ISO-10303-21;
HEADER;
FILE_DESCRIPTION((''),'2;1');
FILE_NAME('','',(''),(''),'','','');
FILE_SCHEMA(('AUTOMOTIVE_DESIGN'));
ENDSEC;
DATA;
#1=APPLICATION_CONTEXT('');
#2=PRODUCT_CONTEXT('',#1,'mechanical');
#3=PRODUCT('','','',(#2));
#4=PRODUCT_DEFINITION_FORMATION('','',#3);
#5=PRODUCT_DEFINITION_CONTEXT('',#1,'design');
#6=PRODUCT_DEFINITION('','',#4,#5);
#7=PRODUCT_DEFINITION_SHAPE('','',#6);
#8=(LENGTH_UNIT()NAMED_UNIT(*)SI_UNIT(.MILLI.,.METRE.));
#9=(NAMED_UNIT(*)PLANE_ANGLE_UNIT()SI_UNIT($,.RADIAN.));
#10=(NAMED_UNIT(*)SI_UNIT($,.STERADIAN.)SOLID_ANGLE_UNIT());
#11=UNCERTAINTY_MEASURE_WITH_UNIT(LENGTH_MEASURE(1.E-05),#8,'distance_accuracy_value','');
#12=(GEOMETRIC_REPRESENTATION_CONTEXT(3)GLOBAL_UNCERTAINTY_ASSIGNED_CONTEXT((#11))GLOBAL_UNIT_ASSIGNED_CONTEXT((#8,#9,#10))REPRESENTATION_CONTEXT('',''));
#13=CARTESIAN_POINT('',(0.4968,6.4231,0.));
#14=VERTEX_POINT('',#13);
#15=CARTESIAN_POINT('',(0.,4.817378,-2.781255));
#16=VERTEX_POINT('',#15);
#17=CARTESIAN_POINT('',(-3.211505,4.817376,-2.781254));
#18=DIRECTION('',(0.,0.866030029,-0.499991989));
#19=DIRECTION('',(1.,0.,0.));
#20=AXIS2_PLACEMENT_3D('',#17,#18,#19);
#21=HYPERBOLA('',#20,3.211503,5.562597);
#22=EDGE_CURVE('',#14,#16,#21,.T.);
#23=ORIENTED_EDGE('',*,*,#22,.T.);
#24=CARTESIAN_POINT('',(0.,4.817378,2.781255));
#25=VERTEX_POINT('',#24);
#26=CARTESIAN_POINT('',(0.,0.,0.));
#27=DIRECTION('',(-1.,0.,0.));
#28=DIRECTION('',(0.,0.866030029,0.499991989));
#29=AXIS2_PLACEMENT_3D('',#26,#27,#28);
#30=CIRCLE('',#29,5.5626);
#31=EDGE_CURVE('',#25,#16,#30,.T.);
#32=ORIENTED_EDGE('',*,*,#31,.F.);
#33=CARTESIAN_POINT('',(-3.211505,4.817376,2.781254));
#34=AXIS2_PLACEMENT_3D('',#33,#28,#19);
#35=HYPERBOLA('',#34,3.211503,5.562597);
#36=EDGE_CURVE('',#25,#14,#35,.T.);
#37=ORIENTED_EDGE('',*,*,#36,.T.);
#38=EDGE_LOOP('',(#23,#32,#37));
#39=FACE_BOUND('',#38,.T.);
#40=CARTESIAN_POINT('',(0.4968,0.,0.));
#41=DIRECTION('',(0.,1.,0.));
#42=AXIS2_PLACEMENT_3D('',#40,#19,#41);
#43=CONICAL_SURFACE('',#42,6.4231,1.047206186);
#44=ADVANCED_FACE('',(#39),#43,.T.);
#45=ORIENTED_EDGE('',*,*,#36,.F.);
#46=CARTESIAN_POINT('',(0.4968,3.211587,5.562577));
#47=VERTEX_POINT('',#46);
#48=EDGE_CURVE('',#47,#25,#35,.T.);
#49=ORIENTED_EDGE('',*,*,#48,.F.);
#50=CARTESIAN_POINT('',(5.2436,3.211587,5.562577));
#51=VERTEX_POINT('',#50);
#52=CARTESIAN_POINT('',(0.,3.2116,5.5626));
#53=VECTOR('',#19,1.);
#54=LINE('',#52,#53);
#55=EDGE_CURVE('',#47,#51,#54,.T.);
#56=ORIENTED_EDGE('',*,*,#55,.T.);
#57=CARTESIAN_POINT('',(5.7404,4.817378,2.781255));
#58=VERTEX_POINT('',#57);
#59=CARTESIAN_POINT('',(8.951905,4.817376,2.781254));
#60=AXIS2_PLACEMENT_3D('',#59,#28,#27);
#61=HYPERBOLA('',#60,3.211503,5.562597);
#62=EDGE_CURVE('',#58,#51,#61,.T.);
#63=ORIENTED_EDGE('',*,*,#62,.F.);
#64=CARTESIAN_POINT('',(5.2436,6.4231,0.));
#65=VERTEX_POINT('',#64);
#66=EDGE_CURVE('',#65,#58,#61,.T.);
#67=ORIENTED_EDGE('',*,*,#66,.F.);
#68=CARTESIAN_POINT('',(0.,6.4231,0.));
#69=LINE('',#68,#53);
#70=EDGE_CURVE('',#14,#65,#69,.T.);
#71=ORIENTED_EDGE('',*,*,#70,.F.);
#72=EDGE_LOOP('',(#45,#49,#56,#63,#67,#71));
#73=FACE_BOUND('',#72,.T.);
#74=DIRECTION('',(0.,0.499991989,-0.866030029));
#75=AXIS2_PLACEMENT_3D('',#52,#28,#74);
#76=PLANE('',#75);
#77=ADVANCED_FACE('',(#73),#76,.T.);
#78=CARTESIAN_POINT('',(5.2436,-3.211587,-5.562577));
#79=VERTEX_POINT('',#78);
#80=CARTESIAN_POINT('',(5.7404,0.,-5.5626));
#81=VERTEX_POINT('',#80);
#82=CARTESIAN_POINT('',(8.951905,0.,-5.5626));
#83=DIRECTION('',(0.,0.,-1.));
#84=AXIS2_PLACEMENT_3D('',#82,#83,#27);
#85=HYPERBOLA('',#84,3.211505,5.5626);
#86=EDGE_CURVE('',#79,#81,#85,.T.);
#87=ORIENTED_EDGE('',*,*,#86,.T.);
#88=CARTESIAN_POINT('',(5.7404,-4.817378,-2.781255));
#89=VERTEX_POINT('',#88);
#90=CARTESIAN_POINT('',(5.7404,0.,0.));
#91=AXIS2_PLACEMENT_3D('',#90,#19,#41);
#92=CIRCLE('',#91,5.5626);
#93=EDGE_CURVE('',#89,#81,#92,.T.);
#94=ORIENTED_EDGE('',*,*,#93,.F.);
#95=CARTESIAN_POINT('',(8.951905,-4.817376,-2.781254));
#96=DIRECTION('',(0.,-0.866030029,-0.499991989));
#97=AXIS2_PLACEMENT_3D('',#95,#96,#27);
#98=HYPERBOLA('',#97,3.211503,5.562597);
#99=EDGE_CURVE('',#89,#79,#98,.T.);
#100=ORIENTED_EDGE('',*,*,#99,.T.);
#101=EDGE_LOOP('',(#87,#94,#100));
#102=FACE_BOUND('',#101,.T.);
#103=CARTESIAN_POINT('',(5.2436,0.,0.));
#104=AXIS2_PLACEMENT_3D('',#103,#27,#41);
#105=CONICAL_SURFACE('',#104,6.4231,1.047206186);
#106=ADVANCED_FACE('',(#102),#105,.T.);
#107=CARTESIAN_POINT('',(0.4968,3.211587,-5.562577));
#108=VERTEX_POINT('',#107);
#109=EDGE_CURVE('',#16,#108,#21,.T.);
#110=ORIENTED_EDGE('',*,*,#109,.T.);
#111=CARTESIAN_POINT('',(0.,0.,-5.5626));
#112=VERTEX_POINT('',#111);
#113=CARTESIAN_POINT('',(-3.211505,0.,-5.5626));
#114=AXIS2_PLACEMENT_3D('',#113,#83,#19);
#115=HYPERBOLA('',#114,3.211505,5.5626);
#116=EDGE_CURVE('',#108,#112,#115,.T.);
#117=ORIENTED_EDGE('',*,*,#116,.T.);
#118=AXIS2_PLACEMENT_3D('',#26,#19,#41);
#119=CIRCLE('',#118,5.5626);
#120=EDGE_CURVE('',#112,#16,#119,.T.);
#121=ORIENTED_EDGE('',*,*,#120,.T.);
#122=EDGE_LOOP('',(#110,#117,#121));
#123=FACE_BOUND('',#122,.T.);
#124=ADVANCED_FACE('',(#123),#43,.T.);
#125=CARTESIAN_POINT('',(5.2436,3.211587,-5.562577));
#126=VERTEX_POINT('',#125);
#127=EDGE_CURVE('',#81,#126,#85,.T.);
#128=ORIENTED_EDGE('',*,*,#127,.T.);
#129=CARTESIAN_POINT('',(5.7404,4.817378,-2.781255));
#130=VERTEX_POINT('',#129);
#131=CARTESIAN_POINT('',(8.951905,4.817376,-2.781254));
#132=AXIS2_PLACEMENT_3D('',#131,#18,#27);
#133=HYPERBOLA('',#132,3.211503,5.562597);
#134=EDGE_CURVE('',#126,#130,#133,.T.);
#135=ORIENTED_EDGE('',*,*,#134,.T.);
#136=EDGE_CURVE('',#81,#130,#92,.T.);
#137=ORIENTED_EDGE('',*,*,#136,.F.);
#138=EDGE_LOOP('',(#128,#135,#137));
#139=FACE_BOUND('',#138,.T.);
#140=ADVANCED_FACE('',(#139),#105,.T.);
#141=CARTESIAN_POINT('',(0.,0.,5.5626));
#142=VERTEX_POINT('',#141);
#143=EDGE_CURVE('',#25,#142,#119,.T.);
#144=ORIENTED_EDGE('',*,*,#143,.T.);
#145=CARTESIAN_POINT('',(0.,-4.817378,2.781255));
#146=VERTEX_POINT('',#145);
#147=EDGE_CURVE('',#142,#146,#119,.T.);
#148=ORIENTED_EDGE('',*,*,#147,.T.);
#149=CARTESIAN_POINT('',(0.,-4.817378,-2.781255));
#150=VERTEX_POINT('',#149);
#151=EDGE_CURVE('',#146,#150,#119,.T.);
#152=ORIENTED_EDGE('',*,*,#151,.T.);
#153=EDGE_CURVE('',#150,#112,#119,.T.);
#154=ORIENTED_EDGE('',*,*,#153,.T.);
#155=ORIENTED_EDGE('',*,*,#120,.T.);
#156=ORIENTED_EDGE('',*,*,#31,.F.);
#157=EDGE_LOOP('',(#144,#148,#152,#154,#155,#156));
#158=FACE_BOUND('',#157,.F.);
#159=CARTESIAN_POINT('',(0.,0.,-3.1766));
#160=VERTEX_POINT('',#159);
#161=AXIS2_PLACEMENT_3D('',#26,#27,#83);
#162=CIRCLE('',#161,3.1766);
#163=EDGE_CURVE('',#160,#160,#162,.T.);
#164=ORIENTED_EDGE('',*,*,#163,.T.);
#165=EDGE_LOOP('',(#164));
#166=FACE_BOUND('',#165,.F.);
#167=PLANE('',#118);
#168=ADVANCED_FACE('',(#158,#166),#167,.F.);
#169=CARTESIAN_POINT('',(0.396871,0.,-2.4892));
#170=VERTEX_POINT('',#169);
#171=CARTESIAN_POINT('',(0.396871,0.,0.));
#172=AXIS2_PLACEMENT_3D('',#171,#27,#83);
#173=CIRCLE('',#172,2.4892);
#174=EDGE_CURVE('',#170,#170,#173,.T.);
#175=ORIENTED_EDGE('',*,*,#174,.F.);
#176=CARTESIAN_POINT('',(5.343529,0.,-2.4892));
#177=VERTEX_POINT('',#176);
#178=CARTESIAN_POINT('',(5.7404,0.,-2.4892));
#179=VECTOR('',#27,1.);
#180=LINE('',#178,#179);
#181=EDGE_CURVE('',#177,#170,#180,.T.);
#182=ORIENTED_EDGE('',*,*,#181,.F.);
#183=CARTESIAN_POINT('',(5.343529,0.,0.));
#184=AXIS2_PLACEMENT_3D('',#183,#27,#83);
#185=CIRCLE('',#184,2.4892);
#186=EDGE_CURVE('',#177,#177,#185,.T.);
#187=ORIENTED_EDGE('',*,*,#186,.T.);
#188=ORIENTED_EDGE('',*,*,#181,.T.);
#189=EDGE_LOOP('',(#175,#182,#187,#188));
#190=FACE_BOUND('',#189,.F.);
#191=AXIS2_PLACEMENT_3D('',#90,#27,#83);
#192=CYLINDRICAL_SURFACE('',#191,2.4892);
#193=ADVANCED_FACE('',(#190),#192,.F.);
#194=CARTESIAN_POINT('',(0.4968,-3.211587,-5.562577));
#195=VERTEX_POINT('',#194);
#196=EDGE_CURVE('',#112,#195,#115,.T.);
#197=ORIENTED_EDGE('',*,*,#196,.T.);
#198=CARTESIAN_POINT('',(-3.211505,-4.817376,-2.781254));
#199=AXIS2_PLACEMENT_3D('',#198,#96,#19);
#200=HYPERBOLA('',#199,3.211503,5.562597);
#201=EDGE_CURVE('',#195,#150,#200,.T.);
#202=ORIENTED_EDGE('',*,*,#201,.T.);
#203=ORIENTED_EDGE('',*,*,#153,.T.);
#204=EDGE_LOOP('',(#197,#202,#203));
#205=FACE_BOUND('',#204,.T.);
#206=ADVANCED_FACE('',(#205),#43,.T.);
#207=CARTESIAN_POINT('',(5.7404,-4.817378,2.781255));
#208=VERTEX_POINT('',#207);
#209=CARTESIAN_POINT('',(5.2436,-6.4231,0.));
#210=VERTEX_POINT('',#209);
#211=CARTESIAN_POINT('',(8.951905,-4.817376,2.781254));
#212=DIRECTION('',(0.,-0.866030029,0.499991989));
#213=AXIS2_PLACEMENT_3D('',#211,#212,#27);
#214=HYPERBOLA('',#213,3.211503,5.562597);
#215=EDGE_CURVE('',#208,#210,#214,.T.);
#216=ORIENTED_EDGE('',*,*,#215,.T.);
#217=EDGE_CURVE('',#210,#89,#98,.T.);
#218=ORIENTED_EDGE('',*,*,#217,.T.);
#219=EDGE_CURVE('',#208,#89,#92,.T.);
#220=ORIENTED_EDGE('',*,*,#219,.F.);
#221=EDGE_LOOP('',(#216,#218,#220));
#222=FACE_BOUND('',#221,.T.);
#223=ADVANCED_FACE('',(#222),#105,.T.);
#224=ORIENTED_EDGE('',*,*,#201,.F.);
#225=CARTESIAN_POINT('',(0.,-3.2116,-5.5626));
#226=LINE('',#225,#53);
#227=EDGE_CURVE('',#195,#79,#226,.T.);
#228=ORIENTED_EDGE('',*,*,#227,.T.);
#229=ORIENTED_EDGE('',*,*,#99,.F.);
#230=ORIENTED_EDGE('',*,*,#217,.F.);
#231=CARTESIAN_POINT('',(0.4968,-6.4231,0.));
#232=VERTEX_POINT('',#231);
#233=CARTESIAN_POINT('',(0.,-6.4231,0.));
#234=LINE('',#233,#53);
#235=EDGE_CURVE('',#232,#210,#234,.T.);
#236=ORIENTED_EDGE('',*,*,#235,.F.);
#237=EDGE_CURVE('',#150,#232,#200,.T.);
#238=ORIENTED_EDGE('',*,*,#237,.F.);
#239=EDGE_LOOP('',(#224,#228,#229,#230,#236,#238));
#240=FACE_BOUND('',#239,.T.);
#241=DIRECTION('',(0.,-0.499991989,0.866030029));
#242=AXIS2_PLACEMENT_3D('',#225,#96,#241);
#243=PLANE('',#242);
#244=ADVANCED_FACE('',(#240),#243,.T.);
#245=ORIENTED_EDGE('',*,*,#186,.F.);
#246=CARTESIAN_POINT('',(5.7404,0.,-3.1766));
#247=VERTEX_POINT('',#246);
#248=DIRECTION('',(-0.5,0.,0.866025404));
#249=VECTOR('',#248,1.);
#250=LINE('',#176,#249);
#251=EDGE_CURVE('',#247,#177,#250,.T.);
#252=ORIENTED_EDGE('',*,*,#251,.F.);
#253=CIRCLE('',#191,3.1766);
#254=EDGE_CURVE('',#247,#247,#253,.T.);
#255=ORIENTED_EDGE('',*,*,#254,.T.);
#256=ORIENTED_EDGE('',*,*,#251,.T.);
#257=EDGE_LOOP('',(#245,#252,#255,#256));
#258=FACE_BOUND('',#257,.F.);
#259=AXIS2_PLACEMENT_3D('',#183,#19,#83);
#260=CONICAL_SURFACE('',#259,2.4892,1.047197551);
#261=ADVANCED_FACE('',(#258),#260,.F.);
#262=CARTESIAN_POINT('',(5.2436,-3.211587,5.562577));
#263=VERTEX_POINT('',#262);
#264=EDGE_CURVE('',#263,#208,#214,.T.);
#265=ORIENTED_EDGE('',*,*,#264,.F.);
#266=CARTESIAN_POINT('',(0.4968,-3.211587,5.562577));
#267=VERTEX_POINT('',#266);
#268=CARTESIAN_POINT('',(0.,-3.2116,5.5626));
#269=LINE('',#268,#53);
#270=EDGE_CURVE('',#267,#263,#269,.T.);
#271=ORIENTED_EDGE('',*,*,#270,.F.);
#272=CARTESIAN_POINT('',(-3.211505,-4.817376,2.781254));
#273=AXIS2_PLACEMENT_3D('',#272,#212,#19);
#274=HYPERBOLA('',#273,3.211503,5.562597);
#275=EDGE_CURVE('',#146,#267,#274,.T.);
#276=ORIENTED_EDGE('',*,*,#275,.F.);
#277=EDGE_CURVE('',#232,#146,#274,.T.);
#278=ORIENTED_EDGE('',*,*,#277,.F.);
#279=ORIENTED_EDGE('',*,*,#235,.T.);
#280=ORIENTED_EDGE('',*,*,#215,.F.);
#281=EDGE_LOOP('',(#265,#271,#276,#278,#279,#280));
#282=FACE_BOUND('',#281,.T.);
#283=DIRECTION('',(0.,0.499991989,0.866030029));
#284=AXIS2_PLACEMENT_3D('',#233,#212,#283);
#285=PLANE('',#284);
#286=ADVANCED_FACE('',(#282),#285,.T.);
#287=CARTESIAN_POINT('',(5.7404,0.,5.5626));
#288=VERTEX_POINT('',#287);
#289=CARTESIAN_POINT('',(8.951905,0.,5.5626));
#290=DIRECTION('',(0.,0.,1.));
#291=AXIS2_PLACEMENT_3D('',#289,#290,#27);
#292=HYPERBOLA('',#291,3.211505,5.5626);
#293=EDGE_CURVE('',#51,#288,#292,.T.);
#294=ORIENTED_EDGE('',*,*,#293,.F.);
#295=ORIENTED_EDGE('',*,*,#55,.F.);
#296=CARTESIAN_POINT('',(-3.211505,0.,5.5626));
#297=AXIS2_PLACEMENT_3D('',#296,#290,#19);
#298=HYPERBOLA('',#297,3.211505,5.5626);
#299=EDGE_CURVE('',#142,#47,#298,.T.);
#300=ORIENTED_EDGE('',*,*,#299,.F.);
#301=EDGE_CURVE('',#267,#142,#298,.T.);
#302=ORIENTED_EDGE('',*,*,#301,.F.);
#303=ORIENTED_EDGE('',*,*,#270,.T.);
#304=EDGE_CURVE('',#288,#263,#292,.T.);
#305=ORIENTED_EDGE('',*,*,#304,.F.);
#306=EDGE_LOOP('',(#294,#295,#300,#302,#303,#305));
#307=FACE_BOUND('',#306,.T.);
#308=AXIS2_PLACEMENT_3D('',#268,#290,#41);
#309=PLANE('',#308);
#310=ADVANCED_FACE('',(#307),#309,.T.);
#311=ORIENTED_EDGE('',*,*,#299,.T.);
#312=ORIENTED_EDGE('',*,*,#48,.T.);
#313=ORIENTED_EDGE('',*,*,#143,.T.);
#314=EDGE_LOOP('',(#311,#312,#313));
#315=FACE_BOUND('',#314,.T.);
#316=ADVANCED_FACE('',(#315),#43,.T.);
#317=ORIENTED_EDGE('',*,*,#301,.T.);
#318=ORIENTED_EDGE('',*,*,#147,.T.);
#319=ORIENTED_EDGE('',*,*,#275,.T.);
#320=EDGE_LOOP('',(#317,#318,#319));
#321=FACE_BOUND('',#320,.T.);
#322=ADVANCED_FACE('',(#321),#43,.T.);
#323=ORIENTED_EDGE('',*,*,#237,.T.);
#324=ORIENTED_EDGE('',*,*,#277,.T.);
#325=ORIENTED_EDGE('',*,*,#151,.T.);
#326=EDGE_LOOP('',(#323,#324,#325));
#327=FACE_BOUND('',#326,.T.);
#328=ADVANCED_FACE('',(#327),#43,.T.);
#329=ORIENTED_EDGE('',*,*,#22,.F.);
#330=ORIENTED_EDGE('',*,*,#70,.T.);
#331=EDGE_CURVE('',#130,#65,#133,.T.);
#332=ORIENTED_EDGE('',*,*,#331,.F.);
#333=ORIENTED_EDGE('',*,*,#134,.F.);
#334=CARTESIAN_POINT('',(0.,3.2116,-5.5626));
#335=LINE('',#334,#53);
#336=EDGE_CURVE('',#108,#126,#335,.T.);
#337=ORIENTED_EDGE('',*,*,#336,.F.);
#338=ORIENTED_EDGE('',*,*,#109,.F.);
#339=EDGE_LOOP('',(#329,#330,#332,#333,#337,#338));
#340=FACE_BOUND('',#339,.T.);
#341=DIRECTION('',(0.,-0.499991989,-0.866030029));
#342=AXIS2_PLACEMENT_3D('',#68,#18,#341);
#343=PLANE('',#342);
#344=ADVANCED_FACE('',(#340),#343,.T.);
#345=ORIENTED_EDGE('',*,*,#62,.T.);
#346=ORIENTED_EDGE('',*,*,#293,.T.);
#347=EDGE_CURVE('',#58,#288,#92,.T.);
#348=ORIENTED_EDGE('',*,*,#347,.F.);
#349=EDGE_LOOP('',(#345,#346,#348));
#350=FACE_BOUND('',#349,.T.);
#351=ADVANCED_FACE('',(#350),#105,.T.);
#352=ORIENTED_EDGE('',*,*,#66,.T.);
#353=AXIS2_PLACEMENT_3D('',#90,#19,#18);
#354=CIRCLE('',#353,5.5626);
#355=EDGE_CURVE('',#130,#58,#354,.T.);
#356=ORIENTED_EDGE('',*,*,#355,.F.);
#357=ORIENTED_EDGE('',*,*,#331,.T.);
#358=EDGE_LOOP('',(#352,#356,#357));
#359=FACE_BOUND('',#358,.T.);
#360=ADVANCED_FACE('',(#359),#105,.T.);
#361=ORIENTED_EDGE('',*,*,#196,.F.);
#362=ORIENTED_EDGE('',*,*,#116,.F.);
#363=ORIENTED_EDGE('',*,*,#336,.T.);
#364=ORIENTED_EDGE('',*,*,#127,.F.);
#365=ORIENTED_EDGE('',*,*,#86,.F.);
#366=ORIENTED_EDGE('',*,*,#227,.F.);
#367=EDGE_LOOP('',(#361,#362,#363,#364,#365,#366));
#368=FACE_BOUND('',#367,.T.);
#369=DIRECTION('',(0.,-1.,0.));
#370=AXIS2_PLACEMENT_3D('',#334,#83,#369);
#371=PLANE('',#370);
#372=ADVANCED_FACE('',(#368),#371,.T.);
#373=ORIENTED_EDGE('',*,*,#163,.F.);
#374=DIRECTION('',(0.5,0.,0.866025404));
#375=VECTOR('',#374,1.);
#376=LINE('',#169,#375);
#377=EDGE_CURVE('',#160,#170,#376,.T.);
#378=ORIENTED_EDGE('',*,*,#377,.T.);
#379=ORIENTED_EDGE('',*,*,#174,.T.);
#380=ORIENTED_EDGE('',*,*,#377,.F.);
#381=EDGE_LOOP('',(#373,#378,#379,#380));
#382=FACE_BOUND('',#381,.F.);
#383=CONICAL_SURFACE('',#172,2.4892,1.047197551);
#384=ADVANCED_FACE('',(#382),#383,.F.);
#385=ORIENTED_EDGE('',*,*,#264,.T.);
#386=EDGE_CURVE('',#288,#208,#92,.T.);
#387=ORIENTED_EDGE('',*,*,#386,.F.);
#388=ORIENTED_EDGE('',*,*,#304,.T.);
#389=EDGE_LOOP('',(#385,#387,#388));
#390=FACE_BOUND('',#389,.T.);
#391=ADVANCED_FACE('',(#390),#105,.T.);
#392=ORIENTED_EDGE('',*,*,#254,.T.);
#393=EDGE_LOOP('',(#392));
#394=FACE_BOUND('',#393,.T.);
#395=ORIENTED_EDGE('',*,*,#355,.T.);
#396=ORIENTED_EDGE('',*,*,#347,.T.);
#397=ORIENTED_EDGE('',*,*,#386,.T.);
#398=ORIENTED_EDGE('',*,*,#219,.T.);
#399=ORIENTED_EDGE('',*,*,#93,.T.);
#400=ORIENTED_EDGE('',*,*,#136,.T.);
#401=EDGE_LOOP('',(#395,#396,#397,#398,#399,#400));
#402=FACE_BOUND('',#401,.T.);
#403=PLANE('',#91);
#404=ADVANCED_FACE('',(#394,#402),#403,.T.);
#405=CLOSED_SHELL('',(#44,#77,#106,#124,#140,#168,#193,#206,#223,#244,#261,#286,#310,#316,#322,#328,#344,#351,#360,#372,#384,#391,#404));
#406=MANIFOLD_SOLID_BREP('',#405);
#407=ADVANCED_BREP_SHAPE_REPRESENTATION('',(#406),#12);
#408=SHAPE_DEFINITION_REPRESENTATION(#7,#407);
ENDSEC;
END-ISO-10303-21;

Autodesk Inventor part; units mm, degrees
ref_plane "YZ Plane" through (0, 0, 0) normal (1, 0, 0) x (0, 1, 0)
ref_plane "XZ Plane" through (0, 0, 0) normal (0, 1, 0) x (-1, 0, 0)
sketch "Sketch1" plane through (0, 0, 0) normal (1, 0, 0) x (0, 1, 0)
  line L0 (-6.4231, 0) -> (-3.2116, 5.5626)
  line L1 (-3.2116, 5.5626) -> (3.2116, 5.5626)
  line L2 (3.2116, 5.5626) -> (6.4231, 0)
  line L3 (6.4231, 0) -> (3.2116, -5.5626)
  line L4 (3.2116, -5.5626) -> (-3.2116, -5.5626)
  line L5 (-3.2116, -5.5626) -> (-6.4231, 0)
  point P0 (0, 0)
  point P1 (0, 0)
  dimension "d0" = 12.8463
extrude "Body" add sketch "Sketch1" along normal blind 5.7404
sketch "Sketch2" plane through (0, 0, 0) normal (0, 0, 1) x (1, 0, 0)
  line L0 (0, 3.2116) -> (0, 6.4231) projected
  line L1 (0, 6.4231) -> (5.7404, 6.4231) projected
  line L2 (5.7404, 3.2116) -> (5.7404, 6.4231) projected
  line L3 (-1.1481, 0) -> (6.8885, 0) projected
  line L4 (0.4968, 6.4231) -> (0, 5.5626)
  line L5 (5.2436, 6.4231) -> (5.7404, 5.5626)
  dimension "d3" = 30
  dimension "d4" = 30
  dimension "d5" = 11.1252
  dimension "d6" = 11.1252
revolve "Chamfer1" cut sketch "Sketch2" angle 360 about axis through (-10, 0, 0) along (1, 0, 0)
sketch "Sketch3" plane through (5.7404, 0, 0) normal (1, 0, 0) x (0, 0, -1)
  arc A0 (-2.7813, -4.8174) -> (2.7813, -4.8174) centre (0, 0) ccw projected
hole "Thread" at (5.7404, 0, 0) direction (-1, 0, 0) diameter 4.9784 end through all thread size "1/4-20 UNC" class "2B" standard "ANSI Unified Screw Threads"
chamfer "Chamfer2" distance 0.6874 angle 30 1 edges at (5.7404, 0, 2.4892) measured on face at (5.7404, -4.5118, -0.1)
chamfer "Chamfer3" distance 0.6874 angle 30 1 edges at (0, 0, 2.4892) measured on face at (0, -4.5118, -0.1)
ref_plane "Work Plane1" through (-12.197, 0, 0) normal (0, -0.8660254, -0.5) x (1, 0, 0)
equation "\"d0\" = 1.1547 * SW"
equation "\"d1\" = KOH"
equation "\"d3\" = ANG1"
equation "\"d4\" = ANG2"
equation "\"d5\" = SW0"
equation "\"d6\" = SW01"
equation "\"d8\" = -0.5 * GD1 + 0.5 * NND"
equation "\"d40\" = -0.5 * GD1 + 0.5 * NND"
equation "\"d10\" = -0.5 * GD1 + 0.5 * NND"
equation "\"d41\" = -0.5 * GD1 + 0.5 * NND"
equation "\"ANG1\" = 30deg"
equation "\"ANG2\" = 30deg"
equation "\"NND\" = 6.35"
equation "\"KOH\" = 5.7404"
equation "\"SW\" = 11.1252"
equation "\"SW0\" = SW"
equation "\"SW01\" = SW"
equation "\"THREADDIA\" = 6.35"
equation "\"TOA\" = 30deg"
equation "\"E0\" = 1.155 * SW"
equation "\"GD1\" = 4.975185"
properties part number "AS 2465 - 1/4  UNC" material "Steel, Mild"
